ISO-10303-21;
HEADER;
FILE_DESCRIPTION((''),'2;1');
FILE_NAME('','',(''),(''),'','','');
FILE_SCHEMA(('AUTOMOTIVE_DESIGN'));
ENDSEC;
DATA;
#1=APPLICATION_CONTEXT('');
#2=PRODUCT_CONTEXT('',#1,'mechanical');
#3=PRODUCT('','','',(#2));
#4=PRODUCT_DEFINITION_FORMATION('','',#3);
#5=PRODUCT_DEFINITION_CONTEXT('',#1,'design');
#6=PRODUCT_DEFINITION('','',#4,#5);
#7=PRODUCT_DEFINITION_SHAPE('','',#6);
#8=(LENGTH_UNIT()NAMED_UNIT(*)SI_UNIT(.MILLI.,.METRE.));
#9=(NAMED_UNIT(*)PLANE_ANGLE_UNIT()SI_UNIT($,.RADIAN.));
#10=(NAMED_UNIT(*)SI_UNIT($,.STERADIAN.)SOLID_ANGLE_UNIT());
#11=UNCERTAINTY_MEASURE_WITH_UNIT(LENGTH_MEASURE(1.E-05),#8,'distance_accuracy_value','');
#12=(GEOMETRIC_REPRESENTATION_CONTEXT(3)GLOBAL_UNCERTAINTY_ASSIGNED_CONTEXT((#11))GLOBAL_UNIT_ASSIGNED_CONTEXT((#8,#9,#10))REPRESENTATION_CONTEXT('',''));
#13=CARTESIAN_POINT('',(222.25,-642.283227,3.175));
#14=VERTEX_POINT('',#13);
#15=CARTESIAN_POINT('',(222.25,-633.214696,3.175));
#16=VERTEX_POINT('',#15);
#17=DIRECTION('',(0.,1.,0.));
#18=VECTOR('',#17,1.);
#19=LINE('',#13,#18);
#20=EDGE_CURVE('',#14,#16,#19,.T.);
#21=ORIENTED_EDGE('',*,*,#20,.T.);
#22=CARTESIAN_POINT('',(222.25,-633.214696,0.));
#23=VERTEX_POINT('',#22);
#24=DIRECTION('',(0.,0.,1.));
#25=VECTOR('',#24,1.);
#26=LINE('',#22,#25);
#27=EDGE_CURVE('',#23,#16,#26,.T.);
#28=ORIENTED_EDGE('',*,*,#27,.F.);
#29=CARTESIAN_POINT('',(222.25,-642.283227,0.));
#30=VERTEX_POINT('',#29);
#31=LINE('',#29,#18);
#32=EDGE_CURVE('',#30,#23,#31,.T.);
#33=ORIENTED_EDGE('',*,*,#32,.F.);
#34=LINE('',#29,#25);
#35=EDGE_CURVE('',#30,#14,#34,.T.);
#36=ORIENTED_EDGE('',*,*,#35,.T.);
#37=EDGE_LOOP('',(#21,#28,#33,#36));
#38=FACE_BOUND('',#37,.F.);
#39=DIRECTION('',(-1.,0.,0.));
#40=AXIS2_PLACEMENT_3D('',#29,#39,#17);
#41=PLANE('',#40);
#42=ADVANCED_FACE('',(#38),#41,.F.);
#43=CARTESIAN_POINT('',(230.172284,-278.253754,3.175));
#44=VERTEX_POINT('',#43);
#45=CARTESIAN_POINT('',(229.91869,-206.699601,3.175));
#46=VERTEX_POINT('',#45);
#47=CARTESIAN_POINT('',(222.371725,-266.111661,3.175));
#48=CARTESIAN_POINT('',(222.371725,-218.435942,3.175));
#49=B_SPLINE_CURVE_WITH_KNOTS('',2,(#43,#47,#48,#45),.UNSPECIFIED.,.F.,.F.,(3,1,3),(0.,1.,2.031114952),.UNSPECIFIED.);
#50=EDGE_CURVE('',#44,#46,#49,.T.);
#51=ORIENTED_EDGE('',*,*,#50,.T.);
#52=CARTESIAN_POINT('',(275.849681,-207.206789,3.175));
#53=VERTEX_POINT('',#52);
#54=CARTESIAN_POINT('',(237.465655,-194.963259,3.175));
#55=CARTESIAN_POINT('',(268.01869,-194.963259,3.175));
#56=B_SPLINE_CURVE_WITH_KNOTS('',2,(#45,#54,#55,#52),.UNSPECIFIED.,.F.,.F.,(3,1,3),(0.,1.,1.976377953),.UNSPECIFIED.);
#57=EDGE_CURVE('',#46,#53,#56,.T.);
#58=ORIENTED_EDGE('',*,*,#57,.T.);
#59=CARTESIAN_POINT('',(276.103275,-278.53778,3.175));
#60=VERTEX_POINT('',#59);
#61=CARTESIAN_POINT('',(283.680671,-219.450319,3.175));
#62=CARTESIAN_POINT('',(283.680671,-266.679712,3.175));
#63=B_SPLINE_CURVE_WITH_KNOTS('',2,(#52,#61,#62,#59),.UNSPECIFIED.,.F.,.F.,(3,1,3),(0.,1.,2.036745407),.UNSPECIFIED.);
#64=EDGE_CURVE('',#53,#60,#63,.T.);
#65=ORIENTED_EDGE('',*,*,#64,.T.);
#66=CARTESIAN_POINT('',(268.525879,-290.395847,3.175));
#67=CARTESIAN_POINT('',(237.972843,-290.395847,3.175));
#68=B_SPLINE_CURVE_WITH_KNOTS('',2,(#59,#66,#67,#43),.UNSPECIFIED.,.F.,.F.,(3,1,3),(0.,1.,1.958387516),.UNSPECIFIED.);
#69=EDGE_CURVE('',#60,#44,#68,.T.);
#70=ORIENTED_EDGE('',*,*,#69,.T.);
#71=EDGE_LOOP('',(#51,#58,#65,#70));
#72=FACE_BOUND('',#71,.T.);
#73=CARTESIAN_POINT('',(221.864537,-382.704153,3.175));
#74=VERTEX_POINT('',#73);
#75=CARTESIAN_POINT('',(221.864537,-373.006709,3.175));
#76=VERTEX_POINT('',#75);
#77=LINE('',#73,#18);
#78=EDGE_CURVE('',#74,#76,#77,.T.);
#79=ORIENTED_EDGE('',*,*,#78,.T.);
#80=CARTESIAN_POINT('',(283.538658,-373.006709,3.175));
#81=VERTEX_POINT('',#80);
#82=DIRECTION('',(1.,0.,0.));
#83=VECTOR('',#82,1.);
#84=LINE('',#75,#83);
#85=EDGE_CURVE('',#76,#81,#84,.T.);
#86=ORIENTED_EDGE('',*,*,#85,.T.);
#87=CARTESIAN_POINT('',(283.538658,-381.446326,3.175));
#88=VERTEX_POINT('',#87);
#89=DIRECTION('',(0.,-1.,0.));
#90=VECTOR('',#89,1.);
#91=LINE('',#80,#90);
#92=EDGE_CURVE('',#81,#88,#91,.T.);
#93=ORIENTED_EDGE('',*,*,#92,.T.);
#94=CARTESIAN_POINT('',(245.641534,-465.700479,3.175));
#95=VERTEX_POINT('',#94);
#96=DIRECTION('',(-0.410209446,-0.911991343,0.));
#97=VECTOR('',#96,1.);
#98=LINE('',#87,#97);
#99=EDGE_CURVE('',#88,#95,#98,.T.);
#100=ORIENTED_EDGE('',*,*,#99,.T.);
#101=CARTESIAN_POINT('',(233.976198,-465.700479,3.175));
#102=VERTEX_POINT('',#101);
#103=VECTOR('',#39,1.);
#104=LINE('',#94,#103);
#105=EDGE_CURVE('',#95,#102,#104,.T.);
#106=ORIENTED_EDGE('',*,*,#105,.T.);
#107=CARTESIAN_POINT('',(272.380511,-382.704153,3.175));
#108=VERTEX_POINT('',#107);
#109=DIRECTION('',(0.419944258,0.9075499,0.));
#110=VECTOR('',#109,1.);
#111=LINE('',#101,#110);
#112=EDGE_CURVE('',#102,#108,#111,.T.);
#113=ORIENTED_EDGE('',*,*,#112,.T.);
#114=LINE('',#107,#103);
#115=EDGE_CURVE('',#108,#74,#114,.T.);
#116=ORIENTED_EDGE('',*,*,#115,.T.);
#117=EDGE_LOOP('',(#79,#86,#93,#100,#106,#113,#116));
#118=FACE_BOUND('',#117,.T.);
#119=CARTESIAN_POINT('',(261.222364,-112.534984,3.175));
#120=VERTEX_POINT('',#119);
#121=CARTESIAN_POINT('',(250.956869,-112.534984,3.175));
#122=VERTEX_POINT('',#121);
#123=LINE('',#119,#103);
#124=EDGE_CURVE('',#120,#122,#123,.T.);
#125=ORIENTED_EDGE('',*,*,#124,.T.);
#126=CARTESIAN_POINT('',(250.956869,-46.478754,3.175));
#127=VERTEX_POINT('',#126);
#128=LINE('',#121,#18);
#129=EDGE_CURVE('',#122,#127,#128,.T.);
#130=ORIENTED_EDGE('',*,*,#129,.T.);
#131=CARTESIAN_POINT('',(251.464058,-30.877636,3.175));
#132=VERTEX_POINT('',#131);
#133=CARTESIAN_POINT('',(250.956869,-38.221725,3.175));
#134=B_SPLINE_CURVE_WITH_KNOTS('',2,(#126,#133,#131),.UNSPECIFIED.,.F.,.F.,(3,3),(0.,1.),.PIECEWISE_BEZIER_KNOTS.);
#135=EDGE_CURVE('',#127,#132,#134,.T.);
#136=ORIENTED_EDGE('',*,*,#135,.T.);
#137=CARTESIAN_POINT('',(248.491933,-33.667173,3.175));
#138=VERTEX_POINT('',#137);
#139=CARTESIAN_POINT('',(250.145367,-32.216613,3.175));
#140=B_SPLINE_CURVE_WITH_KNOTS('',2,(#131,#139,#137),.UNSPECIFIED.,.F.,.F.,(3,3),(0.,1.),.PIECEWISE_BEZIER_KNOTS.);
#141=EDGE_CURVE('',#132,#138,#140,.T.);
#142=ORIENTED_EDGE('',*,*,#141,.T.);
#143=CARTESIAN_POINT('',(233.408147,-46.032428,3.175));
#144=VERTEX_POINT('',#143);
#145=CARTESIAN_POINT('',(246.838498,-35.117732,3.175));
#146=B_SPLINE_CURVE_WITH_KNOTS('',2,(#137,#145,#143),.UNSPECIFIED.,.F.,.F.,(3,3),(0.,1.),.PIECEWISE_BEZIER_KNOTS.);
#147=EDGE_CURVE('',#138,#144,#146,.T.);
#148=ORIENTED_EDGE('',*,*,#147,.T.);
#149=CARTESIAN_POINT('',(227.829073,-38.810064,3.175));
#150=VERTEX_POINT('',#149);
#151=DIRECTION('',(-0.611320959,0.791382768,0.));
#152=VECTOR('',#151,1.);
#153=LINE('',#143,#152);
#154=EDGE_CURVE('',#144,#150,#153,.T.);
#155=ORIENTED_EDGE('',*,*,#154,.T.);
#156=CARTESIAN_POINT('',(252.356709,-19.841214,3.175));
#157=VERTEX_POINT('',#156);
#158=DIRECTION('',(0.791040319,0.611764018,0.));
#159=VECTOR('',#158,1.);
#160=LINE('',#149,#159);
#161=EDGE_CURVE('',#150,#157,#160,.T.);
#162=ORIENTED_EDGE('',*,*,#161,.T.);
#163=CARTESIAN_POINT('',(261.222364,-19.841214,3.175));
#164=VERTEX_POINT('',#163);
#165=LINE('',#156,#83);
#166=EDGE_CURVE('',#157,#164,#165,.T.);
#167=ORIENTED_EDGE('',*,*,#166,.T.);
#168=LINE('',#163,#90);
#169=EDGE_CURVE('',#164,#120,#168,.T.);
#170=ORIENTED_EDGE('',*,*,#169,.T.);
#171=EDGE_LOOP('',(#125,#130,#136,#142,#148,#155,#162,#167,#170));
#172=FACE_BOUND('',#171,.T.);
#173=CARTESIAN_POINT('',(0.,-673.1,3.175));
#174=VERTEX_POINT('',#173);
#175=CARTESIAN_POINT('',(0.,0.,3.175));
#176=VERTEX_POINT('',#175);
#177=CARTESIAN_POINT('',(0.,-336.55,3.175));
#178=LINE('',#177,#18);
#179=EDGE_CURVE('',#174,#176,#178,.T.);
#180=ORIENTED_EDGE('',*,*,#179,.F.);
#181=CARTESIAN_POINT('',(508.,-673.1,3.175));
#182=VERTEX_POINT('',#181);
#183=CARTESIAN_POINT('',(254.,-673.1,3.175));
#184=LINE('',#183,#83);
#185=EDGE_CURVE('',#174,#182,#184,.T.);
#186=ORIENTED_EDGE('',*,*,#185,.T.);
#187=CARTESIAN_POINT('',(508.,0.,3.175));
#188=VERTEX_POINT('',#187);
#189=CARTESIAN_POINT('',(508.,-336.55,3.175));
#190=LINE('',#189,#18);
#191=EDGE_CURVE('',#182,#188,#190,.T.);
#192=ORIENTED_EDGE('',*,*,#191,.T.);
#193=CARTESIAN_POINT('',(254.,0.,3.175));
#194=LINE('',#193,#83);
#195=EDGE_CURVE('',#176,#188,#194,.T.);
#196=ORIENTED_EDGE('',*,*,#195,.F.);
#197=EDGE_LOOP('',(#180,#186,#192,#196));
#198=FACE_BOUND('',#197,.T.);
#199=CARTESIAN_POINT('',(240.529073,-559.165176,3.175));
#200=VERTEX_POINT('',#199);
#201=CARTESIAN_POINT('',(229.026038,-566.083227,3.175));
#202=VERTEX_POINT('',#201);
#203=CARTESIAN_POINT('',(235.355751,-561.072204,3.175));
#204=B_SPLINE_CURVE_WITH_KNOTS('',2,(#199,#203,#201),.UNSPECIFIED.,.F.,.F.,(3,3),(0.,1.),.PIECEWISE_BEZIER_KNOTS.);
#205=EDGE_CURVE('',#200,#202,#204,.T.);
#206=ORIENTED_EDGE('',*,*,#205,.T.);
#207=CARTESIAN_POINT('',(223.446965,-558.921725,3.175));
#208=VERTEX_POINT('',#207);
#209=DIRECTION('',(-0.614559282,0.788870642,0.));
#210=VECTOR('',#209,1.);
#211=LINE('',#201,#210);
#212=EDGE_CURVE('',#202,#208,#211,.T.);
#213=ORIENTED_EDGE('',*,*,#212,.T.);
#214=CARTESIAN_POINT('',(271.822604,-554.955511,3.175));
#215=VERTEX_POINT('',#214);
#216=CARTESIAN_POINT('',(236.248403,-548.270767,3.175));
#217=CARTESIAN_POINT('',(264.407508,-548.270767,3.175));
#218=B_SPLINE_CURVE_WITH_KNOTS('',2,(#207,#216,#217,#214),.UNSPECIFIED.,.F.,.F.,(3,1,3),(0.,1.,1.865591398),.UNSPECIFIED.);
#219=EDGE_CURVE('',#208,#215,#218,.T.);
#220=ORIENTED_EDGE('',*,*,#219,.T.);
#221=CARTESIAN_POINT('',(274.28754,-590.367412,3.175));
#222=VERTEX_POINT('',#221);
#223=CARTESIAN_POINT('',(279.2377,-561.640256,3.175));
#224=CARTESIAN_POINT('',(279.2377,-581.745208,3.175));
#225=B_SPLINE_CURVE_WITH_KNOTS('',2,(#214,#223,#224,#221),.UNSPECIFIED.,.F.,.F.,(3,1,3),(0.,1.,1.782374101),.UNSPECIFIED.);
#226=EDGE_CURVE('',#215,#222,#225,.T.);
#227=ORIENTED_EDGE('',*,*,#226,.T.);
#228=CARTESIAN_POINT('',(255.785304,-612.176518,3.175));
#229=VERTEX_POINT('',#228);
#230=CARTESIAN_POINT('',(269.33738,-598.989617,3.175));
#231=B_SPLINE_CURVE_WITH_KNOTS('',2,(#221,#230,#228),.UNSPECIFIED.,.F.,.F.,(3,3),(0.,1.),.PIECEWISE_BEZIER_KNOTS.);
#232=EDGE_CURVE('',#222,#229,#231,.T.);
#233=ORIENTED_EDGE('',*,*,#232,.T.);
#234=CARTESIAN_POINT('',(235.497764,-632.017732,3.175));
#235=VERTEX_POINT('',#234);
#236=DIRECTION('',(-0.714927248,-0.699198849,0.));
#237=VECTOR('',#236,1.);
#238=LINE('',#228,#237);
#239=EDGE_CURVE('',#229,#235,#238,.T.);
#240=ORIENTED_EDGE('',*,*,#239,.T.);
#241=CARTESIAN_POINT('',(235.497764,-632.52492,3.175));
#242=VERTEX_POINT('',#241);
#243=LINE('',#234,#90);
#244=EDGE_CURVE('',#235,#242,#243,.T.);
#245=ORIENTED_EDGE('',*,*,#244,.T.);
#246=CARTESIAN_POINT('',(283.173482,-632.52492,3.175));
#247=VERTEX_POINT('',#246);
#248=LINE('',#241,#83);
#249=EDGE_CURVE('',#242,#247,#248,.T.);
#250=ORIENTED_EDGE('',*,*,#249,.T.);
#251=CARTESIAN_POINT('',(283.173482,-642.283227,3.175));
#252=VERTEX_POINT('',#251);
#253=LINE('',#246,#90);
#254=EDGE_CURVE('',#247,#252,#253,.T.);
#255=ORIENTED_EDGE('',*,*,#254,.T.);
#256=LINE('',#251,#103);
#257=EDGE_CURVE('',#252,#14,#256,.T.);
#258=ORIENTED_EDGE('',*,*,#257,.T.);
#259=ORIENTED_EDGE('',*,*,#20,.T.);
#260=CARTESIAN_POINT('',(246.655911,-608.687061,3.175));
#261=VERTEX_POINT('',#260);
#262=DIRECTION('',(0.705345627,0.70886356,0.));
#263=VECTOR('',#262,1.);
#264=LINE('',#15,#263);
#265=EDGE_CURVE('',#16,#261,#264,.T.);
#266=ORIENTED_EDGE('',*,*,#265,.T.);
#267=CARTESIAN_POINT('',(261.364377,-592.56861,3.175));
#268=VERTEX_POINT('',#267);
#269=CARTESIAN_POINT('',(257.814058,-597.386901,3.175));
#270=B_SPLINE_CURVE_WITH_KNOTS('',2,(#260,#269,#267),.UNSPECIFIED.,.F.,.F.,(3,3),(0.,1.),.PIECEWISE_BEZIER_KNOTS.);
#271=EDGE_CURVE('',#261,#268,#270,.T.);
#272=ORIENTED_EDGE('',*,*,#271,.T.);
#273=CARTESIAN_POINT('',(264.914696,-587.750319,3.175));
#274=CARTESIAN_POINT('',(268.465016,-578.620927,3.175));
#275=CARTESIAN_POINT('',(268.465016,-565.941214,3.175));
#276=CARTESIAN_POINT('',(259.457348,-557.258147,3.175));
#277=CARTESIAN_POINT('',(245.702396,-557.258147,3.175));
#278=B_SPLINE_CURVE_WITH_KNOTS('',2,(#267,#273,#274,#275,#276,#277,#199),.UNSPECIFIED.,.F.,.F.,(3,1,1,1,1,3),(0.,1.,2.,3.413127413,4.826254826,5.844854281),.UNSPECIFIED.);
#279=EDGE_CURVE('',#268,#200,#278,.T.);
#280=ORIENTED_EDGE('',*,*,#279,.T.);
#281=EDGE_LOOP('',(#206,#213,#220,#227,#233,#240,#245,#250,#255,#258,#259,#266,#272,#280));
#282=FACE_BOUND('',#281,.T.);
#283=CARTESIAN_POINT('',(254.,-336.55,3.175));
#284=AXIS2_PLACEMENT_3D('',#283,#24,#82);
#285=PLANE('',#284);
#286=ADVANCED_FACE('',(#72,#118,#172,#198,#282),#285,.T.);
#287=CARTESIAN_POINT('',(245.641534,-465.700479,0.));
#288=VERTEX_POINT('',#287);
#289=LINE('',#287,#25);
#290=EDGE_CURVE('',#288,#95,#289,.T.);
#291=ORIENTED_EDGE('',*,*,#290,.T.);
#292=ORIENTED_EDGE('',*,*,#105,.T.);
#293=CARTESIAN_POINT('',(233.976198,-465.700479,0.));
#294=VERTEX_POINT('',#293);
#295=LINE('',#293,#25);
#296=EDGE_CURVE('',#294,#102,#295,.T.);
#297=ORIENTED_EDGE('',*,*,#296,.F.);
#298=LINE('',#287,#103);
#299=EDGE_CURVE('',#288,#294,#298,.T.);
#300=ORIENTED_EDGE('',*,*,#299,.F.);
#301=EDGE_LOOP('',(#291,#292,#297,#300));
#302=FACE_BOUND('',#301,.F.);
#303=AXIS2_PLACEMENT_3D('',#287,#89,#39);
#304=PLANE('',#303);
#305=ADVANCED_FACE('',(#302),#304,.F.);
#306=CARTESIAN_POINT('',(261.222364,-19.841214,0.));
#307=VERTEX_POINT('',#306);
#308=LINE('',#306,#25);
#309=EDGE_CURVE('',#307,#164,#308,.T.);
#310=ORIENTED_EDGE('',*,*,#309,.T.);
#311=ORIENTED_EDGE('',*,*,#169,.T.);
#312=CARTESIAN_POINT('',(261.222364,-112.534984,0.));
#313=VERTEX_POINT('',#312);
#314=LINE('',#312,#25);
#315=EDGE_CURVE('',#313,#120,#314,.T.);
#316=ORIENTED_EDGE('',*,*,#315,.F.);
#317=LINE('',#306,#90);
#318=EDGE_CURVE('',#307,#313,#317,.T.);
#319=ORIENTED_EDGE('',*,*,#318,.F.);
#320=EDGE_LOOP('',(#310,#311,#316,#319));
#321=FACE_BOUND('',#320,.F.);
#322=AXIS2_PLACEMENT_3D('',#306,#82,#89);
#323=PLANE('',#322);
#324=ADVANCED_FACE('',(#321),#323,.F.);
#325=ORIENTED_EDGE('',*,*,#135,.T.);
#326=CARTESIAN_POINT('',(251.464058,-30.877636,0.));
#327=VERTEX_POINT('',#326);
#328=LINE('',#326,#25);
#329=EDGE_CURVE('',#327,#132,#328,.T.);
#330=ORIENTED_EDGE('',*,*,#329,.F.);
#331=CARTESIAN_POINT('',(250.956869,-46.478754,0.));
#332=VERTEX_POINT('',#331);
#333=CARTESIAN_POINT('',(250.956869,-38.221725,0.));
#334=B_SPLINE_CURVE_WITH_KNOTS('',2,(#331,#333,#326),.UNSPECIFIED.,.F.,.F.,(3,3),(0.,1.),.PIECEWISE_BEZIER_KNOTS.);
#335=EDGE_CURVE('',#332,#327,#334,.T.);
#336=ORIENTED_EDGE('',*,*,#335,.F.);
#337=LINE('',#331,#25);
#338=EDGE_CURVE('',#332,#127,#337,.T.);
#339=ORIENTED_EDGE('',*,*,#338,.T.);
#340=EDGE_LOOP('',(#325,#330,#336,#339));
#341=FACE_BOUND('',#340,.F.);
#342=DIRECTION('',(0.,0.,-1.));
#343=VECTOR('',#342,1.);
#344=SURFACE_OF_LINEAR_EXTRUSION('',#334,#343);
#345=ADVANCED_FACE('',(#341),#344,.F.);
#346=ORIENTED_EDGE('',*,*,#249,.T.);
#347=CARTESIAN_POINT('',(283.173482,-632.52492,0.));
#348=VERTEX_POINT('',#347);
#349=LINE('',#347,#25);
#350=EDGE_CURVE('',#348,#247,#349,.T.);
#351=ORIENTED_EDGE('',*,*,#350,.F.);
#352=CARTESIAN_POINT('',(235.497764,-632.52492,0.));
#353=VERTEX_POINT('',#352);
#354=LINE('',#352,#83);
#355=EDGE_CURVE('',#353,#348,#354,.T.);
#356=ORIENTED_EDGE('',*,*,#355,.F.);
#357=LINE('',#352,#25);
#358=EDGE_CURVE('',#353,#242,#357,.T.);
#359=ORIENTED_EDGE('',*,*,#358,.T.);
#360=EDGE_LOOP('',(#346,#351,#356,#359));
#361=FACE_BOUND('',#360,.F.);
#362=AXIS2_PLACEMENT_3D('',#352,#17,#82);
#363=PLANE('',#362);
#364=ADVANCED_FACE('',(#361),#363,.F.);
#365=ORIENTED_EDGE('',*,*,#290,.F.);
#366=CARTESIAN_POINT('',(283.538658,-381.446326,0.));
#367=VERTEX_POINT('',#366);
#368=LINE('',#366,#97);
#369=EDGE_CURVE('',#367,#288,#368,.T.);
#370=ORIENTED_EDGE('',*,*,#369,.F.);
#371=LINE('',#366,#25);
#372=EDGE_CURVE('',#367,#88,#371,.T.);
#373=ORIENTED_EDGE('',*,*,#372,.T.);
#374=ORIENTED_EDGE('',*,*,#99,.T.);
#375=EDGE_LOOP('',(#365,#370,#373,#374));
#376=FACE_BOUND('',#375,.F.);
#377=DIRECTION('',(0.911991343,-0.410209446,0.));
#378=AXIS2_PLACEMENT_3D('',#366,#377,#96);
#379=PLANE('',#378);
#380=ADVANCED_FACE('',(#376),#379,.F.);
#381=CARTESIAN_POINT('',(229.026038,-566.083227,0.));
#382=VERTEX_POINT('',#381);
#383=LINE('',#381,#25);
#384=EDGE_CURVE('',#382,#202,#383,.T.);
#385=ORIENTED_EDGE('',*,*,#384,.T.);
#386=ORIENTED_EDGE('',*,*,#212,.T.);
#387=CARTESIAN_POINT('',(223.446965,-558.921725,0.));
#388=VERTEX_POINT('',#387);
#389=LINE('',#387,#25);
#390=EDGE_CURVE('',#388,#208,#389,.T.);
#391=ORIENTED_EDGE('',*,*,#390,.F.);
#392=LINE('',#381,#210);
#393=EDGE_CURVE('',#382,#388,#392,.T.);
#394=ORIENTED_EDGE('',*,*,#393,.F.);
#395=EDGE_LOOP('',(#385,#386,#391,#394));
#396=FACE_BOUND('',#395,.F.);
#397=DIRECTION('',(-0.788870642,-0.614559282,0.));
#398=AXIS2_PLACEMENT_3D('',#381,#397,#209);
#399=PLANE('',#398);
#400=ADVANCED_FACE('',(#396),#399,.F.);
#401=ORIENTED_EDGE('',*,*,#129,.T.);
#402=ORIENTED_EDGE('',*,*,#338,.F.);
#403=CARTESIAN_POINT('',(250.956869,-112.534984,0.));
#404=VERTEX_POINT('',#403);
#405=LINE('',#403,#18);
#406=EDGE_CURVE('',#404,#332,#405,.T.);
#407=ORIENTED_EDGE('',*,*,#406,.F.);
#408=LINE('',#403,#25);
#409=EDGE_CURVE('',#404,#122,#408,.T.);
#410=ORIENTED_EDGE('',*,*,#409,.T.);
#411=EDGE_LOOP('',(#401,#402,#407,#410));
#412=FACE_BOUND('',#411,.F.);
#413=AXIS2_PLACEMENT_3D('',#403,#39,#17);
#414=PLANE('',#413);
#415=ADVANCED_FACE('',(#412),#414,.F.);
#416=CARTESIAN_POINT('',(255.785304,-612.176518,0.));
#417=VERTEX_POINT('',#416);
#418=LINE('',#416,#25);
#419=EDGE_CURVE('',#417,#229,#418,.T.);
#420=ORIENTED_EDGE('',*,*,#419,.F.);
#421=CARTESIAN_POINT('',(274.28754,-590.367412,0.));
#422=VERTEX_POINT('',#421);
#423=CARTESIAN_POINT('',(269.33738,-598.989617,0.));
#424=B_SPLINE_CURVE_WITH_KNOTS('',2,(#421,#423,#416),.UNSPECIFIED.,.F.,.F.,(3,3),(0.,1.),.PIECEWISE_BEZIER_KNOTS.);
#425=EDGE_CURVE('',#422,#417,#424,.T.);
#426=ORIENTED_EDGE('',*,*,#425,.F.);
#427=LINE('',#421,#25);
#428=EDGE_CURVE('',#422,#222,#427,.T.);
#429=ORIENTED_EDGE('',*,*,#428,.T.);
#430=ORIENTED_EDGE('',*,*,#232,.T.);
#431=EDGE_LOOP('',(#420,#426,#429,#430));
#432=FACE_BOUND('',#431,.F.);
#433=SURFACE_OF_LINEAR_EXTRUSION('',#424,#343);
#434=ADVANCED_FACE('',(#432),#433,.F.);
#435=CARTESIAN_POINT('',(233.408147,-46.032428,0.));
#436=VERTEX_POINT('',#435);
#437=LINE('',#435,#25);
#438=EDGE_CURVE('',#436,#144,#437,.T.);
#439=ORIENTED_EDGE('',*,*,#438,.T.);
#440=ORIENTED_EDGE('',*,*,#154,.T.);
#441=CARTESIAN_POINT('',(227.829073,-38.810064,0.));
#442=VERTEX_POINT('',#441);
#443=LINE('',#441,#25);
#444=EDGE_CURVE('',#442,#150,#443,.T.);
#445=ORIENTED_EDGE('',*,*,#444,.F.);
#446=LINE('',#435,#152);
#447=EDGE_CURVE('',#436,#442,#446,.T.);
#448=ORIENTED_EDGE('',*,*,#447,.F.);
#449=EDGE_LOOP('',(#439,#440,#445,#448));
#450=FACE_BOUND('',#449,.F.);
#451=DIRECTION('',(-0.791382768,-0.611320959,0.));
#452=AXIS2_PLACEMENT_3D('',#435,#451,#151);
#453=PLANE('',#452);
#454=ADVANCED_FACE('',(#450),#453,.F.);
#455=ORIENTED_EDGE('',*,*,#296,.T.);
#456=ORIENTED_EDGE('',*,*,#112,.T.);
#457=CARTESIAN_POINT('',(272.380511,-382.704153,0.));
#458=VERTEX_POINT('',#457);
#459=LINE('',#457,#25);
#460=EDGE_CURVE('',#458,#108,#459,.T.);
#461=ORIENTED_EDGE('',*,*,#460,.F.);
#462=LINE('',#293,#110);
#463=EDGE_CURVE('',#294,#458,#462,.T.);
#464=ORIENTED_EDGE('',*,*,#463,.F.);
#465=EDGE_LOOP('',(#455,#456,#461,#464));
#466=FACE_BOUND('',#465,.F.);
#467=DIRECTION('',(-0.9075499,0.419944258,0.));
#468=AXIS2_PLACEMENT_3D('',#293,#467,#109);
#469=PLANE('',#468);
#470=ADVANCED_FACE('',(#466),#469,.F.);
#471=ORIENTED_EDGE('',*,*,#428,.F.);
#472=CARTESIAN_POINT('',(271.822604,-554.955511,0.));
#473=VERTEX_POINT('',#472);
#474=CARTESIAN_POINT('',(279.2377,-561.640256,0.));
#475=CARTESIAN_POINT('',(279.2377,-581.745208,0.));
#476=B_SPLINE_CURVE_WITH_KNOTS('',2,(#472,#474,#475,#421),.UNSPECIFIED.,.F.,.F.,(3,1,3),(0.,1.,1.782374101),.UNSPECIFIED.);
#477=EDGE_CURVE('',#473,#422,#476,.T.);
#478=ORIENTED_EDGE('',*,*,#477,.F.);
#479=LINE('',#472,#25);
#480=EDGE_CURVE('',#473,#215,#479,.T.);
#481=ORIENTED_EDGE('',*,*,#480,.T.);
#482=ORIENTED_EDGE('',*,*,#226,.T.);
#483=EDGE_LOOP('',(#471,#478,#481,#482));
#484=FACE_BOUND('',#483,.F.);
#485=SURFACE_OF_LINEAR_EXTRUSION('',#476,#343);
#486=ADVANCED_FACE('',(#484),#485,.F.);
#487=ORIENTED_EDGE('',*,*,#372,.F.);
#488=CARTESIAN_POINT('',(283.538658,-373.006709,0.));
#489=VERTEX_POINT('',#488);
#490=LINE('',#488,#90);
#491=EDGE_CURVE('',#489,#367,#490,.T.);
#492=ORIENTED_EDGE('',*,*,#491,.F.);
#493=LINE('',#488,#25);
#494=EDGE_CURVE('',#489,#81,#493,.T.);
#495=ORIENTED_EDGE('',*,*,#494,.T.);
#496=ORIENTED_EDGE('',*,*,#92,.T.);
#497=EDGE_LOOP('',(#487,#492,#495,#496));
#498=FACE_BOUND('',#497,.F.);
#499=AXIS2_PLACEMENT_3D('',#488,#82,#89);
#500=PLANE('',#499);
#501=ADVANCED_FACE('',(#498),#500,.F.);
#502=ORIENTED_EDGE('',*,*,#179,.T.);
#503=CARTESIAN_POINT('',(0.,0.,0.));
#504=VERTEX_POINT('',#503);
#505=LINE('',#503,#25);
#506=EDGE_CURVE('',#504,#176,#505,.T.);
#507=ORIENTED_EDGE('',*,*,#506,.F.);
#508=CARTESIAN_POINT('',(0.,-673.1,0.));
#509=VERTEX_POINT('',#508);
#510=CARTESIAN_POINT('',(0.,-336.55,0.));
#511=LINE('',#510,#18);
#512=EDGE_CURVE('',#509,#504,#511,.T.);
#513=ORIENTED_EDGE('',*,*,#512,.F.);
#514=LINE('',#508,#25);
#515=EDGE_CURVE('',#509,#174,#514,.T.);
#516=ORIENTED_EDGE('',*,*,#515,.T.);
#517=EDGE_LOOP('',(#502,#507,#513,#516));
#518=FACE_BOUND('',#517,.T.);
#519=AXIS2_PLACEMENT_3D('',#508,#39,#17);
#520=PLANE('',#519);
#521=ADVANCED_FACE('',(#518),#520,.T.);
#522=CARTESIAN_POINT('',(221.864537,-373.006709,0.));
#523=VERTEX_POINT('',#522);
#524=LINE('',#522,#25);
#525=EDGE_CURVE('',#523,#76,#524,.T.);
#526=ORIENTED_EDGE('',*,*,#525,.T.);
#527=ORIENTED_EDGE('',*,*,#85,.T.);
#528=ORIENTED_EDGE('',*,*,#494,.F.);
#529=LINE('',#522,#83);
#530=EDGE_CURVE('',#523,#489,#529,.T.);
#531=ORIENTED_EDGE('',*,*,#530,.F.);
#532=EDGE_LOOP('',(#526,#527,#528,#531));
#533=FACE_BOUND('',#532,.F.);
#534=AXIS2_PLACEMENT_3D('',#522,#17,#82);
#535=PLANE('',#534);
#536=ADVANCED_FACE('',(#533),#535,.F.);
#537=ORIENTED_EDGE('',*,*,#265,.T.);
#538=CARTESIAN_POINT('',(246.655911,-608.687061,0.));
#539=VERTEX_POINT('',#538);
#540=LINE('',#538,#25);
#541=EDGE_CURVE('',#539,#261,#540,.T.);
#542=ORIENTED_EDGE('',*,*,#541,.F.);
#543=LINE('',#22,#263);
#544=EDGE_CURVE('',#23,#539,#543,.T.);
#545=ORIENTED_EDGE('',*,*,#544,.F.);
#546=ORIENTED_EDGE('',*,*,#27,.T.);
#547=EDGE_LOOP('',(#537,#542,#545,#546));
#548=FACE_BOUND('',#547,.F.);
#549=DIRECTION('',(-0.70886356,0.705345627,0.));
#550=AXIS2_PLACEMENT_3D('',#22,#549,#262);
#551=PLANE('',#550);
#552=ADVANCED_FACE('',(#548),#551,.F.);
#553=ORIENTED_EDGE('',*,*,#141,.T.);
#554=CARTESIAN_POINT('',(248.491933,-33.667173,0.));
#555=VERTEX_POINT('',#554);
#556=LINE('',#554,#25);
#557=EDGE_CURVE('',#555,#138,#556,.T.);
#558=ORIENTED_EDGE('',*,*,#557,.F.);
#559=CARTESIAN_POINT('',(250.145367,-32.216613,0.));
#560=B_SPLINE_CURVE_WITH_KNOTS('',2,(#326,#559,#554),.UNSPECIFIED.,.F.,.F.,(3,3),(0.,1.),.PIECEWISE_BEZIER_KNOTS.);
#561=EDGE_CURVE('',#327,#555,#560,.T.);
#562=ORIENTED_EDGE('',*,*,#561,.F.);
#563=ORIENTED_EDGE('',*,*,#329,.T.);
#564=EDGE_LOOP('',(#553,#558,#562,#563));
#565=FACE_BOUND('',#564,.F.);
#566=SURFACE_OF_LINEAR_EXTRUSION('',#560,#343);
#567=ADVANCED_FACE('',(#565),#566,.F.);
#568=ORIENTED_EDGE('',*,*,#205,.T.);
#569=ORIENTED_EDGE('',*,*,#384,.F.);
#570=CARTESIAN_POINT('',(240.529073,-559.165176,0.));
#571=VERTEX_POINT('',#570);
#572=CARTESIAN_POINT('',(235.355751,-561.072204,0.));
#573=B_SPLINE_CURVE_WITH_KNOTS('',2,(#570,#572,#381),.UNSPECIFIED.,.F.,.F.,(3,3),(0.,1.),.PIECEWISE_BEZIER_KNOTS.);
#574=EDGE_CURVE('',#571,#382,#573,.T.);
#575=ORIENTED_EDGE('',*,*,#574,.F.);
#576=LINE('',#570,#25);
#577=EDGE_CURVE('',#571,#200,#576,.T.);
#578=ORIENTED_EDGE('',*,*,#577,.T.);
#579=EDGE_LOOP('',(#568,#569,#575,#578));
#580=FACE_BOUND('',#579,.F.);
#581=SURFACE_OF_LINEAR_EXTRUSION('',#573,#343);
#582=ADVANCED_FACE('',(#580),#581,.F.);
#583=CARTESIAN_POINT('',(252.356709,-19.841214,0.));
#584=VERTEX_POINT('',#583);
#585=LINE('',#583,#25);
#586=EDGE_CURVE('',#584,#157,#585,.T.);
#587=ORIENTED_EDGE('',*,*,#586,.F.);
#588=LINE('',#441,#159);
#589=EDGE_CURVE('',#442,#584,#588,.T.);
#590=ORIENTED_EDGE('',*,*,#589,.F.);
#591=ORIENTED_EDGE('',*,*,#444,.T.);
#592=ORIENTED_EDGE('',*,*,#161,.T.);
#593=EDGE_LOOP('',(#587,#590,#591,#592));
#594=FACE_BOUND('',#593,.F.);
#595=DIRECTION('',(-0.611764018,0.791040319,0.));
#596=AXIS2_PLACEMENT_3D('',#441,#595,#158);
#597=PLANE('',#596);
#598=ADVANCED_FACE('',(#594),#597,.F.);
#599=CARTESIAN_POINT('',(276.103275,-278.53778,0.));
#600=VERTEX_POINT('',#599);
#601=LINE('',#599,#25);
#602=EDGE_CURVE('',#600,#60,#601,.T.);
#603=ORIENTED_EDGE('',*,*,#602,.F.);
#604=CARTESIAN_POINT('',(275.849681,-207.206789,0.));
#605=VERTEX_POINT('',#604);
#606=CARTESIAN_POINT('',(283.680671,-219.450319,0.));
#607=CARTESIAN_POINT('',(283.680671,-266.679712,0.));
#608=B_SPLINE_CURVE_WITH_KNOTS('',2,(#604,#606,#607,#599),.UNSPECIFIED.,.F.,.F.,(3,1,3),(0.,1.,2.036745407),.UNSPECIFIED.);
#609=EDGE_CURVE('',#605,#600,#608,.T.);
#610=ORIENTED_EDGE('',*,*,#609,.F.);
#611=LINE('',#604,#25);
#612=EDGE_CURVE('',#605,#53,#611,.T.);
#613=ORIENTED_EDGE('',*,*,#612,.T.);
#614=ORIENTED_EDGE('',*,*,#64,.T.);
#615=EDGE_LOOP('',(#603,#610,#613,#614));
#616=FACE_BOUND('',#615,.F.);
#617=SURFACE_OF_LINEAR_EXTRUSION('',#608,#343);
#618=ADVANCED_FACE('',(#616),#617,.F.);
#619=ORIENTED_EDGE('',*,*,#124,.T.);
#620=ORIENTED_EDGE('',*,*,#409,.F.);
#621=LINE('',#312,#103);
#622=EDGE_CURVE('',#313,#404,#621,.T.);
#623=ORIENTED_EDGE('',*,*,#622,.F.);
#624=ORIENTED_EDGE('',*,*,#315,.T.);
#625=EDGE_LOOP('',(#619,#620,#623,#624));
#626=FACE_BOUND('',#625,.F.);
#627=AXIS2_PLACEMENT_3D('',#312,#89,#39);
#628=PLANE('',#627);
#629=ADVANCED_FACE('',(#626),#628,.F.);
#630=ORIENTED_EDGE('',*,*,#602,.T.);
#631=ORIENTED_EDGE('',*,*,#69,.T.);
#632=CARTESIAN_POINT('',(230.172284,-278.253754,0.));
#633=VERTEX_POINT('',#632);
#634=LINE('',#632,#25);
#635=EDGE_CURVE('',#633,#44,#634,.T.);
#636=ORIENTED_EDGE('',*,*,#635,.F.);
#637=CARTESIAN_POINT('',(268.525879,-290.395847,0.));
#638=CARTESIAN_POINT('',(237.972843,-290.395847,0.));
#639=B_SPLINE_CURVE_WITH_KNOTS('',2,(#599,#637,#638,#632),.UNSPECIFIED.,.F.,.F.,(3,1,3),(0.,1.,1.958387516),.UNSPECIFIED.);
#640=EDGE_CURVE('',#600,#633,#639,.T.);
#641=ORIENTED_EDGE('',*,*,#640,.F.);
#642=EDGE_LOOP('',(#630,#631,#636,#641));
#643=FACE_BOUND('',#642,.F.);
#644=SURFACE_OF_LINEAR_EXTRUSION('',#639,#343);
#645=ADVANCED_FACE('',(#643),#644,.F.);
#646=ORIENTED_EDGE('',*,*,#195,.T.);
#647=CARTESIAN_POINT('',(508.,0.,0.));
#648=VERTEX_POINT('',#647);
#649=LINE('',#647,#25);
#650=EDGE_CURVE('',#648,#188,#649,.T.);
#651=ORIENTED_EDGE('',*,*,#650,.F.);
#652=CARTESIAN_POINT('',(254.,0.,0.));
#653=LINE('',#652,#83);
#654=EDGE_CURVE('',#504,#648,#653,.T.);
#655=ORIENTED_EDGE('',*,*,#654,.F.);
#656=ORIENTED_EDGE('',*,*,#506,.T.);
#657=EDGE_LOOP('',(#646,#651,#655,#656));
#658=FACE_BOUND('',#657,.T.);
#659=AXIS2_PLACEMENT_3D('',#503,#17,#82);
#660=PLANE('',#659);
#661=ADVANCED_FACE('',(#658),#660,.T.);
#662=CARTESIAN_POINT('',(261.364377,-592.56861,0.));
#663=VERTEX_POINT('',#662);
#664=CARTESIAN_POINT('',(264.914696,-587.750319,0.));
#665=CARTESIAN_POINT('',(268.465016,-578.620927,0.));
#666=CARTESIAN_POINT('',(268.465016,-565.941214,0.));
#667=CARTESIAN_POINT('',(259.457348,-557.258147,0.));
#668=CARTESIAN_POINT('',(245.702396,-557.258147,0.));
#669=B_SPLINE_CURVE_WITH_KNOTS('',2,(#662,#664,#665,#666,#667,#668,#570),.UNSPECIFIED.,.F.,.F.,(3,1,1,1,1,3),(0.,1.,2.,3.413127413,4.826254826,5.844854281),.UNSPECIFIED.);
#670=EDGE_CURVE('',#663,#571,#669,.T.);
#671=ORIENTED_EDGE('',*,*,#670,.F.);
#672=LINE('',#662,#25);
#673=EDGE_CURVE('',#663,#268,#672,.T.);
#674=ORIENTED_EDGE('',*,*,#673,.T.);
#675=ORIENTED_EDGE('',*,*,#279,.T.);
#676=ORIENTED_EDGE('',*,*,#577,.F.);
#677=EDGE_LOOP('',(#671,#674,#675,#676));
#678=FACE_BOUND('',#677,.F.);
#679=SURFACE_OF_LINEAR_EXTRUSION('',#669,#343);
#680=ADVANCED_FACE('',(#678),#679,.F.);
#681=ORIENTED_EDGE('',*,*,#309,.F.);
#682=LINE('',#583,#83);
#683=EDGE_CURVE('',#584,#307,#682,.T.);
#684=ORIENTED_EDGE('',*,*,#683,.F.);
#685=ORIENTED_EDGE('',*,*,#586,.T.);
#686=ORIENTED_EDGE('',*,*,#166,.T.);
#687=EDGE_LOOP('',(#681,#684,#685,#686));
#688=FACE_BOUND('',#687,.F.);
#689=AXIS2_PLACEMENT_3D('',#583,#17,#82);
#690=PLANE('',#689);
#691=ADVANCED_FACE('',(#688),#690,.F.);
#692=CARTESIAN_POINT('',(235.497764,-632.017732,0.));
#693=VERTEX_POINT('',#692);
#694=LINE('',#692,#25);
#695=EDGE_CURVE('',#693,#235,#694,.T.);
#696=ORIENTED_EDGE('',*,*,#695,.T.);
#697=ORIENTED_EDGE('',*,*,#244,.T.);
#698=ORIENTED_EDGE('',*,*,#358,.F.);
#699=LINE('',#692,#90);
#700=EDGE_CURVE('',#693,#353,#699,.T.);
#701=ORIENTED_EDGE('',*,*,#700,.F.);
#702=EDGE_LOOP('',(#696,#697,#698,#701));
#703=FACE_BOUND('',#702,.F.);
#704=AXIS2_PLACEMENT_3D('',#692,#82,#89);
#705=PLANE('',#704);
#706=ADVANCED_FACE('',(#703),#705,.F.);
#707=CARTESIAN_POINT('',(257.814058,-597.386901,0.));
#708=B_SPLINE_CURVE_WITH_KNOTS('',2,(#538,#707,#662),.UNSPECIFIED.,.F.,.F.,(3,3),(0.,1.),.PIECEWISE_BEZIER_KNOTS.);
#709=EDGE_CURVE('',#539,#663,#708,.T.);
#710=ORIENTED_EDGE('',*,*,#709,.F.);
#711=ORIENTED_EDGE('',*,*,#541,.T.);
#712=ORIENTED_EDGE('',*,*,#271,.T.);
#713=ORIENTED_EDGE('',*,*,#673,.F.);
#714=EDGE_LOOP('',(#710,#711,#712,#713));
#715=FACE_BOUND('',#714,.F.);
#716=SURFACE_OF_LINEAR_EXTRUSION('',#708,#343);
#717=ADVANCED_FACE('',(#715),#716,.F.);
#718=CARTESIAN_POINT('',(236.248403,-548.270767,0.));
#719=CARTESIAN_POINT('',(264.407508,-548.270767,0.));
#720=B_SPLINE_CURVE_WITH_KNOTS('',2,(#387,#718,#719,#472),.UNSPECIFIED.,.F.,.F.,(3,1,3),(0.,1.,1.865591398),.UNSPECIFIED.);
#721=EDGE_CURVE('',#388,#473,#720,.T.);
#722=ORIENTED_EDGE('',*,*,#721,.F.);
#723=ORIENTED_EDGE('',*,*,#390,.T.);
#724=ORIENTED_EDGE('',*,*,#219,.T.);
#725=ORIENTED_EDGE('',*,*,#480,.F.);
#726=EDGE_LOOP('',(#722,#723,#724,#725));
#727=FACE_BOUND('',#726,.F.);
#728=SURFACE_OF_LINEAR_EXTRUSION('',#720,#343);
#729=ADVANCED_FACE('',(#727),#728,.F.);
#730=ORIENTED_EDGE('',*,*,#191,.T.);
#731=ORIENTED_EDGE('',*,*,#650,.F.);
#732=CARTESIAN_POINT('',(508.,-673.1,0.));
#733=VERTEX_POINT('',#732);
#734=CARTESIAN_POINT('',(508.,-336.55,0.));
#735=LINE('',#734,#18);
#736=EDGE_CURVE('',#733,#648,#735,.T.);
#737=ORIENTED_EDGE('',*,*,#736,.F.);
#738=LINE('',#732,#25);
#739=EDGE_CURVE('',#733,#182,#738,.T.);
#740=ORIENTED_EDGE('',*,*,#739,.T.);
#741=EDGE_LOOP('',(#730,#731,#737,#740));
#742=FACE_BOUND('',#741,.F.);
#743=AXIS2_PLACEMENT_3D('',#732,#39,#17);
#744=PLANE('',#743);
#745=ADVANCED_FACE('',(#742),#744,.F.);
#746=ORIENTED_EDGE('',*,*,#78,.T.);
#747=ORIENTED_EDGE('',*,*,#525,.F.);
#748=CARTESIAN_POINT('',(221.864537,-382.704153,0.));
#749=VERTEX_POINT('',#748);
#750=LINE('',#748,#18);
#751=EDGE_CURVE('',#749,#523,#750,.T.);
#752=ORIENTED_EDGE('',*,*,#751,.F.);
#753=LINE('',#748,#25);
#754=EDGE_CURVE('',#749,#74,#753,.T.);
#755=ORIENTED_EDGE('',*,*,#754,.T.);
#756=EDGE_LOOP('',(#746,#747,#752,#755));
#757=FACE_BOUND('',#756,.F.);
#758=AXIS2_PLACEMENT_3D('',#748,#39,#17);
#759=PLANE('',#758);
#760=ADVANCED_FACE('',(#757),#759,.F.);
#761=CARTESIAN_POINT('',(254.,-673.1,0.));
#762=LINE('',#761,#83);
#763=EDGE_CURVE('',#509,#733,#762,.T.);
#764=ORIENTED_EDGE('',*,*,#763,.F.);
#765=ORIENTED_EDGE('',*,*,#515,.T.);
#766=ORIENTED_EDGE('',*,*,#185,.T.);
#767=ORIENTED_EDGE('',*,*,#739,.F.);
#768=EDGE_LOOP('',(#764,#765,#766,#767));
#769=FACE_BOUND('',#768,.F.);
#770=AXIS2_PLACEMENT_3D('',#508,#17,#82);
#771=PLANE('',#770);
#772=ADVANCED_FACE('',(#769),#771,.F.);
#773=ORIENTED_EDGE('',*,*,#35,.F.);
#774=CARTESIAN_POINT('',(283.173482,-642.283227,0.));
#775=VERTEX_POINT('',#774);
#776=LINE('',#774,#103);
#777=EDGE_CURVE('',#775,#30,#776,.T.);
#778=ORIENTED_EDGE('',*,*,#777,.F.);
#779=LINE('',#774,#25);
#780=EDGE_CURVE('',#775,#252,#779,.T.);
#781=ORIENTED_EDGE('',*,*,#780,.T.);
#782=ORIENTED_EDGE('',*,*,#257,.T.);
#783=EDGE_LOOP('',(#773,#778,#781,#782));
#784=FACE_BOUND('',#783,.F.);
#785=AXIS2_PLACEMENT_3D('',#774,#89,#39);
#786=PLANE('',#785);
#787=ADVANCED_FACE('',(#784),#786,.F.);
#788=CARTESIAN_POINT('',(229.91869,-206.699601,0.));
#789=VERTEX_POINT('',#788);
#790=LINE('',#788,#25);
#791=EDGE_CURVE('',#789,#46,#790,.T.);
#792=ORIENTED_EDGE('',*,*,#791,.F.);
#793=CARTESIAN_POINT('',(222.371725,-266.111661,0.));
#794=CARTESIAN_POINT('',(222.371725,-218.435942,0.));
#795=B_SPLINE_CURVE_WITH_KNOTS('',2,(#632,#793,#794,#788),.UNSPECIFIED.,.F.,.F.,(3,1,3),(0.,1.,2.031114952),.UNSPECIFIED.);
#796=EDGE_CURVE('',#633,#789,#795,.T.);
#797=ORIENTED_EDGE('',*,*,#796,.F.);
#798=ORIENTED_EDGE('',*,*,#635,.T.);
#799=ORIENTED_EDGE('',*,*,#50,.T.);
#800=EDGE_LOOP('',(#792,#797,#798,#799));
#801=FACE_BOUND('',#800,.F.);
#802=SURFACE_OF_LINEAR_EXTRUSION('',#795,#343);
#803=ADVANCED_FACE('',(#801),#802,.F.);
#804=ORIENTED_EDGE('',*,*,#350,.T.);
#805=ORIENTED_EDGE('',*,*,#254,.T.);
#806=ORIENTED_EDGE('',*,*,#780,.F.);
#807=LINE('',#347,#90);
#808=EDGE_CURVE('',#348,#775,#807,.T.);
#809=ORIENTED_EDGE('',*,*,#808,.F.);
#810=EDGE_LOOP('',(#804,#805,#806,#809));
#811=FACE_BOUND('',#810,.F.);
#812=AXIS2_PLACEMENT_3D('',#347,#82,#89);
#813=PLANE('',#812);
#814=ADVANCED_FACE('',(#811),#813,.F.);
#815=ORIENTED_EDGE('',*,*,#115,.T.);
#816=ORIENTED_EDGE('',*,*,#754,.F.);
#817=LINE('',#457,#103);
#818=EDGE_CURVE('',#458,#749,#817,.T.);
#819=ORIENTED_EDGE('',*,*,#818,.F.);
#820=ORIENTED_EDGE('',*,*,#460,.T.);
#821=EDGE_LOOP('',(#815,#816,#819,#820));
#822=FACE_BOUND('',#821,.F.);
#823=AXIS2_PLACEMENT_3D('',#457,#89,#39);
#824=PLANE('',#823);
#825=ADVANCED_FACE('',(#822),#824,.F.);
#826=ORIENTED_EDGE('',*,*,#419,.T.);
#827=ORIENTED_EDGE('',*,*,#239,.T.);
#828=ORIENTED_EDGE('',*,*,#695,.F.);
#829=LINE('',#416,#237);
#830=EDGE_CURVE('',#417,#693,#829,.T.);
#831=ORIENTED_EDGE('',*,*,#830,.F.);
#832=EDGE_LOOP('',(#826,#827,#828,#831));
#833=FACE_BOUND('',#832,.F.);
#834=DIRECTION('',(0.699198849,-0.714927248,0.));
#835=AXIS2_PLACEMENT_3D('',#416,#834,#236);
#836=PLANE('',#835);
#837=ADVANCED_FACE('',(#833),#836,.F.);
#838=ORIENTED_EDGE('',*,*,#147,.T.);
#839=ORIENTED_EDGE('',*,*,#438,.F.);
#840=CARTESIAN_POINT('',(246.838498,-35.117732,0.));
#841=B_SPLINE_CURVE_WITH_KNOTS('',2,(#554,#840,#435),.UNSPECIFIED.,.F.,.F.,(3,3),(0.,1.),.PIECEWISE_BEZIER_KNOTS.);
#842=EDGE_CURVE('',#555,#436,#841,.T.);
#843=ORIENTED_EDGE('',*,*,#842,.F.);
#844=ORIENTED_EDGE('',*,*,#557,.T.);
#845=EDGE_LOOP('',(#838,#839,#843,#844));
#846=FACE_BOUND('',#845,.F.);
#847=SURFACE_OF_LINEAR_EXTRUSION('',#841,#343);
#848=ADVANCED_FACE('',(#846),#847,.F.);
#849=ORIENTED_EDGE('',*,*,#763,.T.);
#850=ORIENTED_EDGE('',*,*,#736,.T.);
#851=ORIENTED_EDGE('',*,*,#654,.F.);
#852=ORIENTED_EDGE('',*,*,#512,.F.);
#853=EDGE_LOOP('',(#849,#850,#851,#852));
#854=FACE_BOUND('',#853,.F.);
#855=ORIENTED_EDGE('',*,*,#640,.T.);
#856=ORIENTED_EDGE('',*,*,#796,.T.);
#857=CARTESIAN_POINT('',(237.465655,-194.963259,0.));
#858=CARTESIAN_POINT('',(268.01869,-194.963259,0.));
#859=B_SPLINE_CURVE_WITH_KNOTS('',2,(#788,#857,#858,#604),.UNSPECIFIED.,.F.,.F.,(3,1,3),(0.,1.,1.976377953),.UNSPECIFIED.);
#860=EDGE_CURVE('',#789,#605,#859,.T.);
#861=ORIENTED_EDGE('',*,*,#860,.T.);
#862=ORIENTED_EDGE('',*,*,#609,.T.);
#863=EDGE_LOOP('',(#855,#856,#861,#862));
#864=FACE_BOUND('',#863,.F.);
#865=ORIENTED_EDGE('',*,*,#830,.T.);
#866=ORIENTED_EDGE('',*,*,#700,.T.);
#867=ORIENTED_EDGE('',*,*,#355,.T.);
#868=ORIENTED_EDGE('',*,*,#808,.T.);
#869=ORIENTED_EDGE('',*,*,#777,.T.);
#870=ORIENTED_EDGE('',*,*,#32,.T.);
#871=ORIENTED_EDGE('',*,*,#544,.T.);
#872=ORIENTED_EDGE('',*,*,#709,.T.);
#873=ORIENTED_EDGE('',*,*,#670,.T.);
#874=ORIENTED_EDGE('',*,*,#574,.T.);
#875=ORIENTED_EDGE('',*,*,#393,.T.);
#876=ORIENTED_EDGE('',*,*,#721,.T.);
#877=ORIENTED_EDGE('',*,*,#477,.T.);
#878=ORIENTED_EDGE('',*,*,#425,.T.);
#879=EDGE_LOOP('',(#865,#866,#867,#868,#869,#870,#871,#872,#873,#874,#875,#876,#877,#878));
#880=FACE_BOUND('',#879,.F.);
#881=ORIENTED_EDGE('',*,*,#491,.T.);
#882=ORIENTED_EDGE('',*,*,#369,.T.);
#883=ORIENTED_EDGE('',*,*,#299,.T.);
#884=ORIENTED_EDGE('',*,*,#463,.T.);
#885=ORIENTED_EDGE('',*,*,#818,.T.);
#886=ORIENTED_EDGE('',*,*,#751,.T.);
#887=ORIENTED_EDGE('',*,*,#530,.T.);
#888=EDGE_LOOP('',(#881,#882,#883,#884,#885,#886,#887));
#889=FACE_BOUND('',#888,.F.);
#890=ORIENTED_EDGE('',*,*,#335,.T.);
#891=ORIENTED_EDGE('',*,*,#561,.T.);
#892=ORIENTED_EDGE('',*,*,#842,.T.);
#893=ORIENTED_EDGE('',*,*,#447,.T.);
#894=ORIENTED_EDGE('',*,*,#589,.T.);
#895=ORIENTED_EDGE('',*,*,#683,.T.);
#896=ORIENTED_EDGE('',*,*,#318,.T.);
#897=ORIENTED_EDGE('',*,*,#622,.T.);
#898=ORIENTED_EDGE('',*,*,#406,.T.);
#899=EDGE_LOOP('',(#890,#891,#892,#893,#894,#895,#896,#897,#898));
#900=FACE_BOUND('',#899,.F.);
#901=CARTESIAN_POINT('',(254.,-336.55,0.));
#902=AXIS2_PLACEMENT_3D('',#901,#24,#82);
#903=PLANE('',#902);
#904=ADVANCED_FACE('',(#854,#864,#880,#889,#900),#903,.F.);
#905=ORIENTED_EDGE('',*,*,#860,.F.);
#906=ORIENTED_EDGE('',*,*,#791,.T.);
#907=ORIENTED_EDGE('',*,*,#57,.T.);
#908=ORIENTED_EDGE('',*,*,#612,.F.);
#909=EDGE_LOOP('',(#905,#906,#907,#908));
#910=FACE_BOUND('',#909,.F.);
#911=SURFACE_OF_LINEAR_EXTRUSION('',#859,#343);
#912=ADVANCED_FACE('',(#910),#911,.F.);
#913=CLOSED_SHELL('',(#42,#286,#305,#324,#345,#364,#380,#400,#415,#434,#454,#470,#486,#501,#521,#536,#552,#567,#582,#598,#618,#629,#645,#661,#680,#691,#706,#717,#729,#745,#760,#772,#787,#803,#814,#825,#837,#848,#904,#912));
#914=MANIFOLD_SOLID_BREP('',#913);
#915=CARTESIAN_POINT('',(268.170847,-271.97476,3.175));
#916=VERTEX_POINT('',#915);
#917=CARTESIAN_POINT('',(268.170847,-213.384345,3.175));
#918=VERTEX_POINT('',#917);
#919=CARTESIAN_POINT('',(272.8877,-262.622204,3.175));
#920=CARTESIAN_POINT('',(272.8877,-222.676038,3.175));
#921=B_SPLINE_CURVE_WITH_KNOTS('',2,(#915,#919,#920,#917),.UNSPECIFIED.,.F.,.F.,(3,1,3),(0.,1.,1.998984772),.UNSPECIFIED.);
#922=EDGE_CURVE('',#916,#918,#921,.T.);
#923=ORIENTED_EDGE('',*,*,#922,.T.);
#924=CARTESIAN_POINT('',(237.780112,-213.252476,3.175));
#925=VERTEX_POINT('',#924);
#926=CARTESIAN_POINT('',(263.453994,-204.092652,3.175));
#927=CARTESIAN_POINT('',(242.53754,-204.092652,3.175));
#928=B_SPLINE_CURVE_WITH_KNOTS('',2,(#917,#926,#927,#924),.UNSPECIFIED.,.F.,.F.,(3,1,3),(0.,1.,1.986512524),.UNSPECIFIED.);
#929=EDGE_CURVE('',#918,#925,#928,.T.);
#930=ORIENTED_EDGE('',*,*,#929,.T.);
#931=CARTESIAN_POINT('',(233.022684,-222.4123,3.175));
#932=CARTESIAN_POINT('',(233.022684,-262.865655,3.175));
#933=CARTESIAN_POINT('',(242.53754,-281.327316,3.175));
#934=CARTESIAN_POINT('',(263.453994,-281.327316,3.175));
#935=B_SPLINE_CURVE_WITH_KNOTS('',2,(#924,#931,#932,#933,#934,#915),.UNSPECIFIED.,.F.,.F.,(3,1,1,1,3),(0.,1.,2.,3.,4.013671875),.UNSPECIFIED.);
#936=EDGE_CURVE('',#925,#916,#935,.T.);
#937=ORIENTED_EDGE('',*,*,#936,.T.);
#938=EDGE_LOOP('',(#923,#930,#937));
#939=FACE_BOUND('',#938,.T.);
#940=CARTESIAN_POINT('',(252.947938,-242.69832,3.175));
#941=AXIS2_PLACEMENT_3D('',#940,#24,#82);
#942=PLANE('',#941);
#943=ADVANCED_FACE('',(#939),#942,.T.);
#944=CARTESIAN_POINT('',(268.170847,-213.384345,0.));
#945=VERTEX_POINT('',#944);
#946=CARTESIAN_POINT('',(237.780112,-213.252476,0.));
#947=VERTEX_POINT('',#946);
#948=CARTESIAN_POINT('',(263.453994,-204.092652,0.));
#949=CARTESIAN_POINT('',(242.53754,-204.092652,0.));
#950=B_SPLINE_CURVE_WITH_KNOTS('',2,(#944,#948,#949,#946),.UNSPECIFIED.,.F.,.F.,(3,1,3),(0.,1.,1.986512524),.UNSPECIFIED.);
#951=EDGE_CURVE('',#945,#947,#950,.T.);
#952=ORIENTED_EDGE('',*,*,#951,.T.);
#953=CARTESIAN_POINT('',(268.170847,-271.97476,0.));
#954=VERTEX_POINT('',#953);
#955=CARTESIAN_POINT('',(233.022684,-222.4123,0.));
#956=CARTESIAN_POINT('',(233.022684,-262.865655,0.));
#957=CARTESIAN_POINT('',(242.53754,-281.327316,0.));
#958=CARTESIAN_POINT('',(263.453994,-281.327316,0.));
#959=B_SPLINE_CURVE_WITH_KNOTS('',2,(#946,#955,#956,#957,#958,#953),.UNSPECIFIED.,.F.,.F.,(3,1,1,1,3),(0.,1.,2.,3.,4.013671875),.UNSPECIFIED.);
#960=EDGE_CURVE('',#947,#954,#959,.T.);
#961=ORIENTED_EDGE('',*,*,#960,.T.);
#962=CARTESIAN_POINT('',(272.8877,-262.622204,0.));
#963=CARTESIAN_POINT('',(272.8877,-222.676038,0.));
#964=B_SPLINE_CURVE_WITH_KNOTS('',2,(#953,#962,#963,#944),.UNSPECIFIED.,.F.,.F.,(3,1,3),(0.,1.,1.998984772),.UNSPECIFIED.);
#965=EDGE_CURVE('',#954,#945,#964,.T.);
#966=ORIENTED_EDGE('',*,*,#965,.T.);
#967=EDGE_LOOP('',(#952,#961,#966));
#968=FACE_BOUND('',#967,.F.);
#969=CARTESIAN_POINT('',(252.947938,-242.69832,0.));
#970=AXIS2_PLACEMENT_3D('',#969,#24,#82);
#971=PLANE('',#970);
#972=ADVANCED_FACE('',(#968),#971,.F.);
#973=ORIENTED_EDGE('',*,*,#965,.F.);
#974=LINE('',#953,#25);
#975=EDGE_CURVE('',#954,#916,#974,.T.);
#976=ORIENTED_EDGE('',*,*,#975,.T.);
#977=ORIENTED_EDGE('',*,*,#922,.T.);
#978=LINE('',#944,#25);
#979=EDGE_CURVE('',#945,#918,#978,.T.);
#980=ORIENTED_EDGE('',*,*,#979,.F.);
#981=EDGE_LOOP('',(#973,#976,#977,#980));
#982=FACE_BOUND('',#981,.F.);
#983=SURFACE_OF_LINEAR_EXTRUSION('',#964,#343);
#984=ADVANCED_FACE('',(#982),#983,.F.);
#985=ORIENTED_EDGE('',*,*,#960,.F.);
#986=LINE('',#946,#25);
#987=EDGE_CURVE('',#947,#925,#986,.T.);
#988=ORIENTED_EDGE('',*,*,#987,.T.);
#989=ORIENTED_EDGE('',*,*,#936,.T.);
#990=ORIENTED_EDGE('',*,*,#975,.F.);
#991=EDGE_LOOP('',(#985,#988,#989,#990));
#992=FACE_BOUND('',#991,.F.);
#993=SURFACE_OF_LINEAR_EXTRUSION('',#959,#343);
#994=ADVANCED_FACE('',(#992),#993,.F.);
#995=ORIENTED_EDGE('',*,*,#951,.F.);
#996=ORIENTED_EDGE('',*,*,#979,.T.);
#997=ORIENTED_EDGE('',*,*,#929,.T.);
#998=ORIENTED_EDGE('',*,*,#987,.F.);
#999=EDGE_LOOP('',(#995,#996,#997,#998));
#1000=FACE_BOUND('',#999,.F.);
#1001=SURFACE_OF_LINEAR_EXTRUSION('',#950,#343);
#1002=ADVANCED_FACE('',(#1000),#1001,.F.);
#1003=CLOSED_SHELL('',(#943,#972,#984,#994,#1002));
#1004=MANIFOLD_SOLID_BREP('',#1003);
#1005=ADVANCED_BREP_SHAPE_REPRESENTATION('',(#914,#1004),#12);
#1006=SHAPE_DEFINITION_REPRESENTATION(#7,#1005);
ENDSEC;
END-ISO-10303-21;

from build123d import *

# Parameters (mm, degrees)
F0_W     = 508
F0_H     = 673.1
F1_DEPTH = 3.175


# Not quite as in the source:
# - a feature names something its author has since deleted; it is built from what else it names


with BuildPart() as f1:
    # F0 (on Top) → F1 (new body)
    with BuildSketch(Plane.XY):
        with Locations((254, -336.55)):
            Rectangle(F0_W, F0_H)
        with BuildLine():
            Line((283.1734824281, -632.5249201278), (283.1734824281, -642.2832268371))
            Line((283.1734824281, -642.2832268371), (222.25, -642.2832268371))
            Line((222.25, -642.2832268371), (222.25, -633.2146964856))
            Line((222.25, -633.2146964856), (246.6559105431, -608.6870607029))
            add(Edge.make_bspline(
                [(246.6559105431, -608.6870607029), (257.814057508, -597.3869009585), (261.3643769968, -592.5686102236)],
                knots=[0, 0, 0, 1, 1, 1], degree=2))
            add(Edge.make_bspline(
                [(261.3643769968, -592.5686102236), (264.9146964856, -587.7503194888), (266.68985623, -583.1856230032)],
                knots=[0, 0, 0, 1, 1, 1], degree=2))
            add(Edge.make_bspline(
                [(266.68985623, -583.1856230032), (268.4650159744, -578.6209265176), (268.4650159744, -573.3664536741)],
                knots=[0, 0, 0, 1, 1, 1], degree=2))
            add(Edge.make_bspline(
                [(268.4650159744, -573.3664536741), (268.4650159744, -565.9412140575), (263.9611821086, -561.5996805112)],
                knots=[0, 0, 0, 1, 1, 1], degree=2))
            add(Edge.make_bspline(
                [(263.9611821086, -561.5996805112), (259.4573482428, -557.2581469649), (251.464057508, -557.2581469649)],
                knots=[0, 0, 0, 1, 1, 1], degree=2))
            add(Edge.make_bspline(
                [(251.464057508, -557.2581469649), (245.7023961661, -557.2581469649), (240.5290734824, -559.1651757189)],
                knots=[0, 0, 0, 1, 1, 1], degree=2))
            add(Edge.make_bspline(
                [(240.5290734824, -559.1651757189), (235.3557507987, -561.0722044728), (229.0260383387, -566.0832268371)],
                knots=[0, 0, 0, 1, 1, 1], degree=2))
            Line((229.0260383387, -566.0832268371), (223.4469648562, -558.9217252396))
            add(Edge.make_bspline(
                [(223.4469648562, -558.9217252396), (236.2484025559, -548.2707667732), (251.3423322684, -548.2707667732)],
                knots=[0, 0, 0, 1, 1, 1], degree=2))
            add(Edge.make_bspline(
                [(251.3423322684, -548.2707667732), (264.4075079872, -548.2707667732), (271.8226038339, -554.9555111821)],
                knots=[0, 0, 0, 1, 1, 1], degree=2))
            add(Edge.make_bspline(
                [(271.8226038339, -554.9555111821), (279.2376996805, -561.6402555911), (279.2376996805, -572.9201277955)],
                knots=[0, 0, 0, 1, 1, 1], degree=2))
            add(Edge.make_bspline(
                [(279.2376996805, -572.9201277955), (279.2376996805, -581.7452076677), (274.2875399361, -590.3674121406)],
                knots=[0, 0, 0, 1, 1, 1], degree=2))
            add(Edge.make_bspline(
                [(274.2875399361, -590.3674121406), (269.3373801917, -598.9896166134), (255.7853035144, -612.1765175719)],
                knots=[0, 0, 0, 1, 1, 1], degree=2))
            Line((255.7853035144, -612.1765175719), (235.4977635783, -632.0177316294))
            Line((235.4977635783, -632.0177316294), (235.4977635783, -632.5249201278))
            Line((235.4977635783, -632.5249201278), (283.1734824281, -632.5249201278))
        make_face(mode=Mode.SUBTRACT)
        Polygon((245.6415335463, -465.7004792332), (233.9761980831, -465.7004792332), (272.3805111821, -382.7041533546), (221.8645367412, -382.7041533546), (221.8645367412, -373.0067092652), (283.538658147, -373.0067092652), (283.538658147, -381.4463258786), align=None, mode=Mode.SUBTRACT)
        with BuildLine():
            add(Edge.make_bspline(
                [(275.8496805112, -207.2067891374), (283.6806709265, -219.4503194888), (283.6806709265, -242.6389776358)],
                knots=[0, 0, 0, 1, 1, 1], degree=2))
            add(Edge.make_bspline(
                [(283.6806709265, -242.6389776358), (283.6806709265, -266.6797124601), (276.1032747604, -278.5377795527)],
                knots=[0, 0, 0, 1, 1, 1], degree=2))
            add(Edge.make_bspline(
                [(276.1032747604, -278.5377795527), (268.5258785942, -290.3958466454), (252.9247603834, -290.3958466454)],
                knots=[0, 0, 0, 1, 1, 1], degree=2))
            add(Edge.make_bspline(
                [(252.9247603834, -290.3958466454), (237.9728434505, -290.3958466454), (230.172284345, -278.2537539936)],
                knots=[0, 0, 0, 1, 1, 1], degree=2))
            add(Edge.make_bspline(
                [(230.172284345, -278.2537539936), (222.3717252396, -266.1116613419), (222.3717252396, -242.6389776358)],
                knots=[0, 0, 0, 1, 1, 1], degree=2))
            add(Edge.make_bspline(
                [(222.3717252396, -242.6389776358), (222.3717252396, -218.435942492), (229.9186900958, -206.699600639)],
                knots=[0, 0, 0, 1, 1, 1], degree=2))
            add(Edge.make_bspline(
                [(229.9186900958, -206.699600639), (237.4656549521, -194.9632587859), (252.9247603834, -194.9632587859)],
                knots=[0, 0, 0, 1, 1, 1], degree=2))
            add(Edge.make_bspline(
                [(252.9247603834, -194.9632587859), (268.0186900958, -194.9632587859), (275.8496805112, -207.2067891374)],
                knots=[0, 0, 0, 1, 1, 1], degree=2))
        make_face(mode=Mode.SUBTRACT)
        with BuildLine():
            Line((261.2223642173, -19.8412140575), (261.2223642173, -112.5349840256))
            Line((261.2223642173, -112.5349840256), (250.9568690096, -112.5349840256))
            Line((250.9568690096, -112.5349840256), (250.9568690096, -46.4787539936))
            add(Edge.make_bspline(
                [(250.9568690096, -46.4787539936), (250.9568690096, -38.2217252396), (251.464057508, -30.8776357827)],
                knots=[0, 0, 0, 1, 1, 1], degree=2))
            add(Edge.make_bspline(
                [(251.464057508, -30.8776357827), (250.1453674121, -32.2166134185), (248.4919329073, -33.667172524)],
                knots=[0, 0, 0, 1, 1, 1], degree=2))
            add(Edge.make_bspline(
                [(248.4919329073, -33.667172524), (246.8384984026, -35.1177316294), (233.4081469649, -46.032428115)],
                knots=[0, 0, 0, 1, 1, 1], degree=2))
            Line((233.4081469649, -46.032428115), (227.8290734824, -38.8100638978))
            Line((227.8290734824, -38.8100638978), (252.3567092652, -19.8412140575))
            Line((252.3567092652, -19.8412140575), (261.2223642173, -19.8412140575))
        make_face(mode=Mode.SUBTRACT)
    extrude(amount=F1_DEPTH)


with BuildPart() as f1b:
    # F0 (on Top) → F1, piece 2 (new body)
    with BuildSketch(Plane.XY):
        with BuildLine():
            add(Edge.make_bspline(
                [(237.7801118211, -213.2524760383), (233.0226837061, -222.4123003195), (233.0226837061, -242.6389776358)],
                knots=[0, 0, 0, 1, 1, 1], degree=2))
            add(Edge.make_bspline(
                [(233.0226837061, -242.6389776358), (233.0226837061, -262.8656549521), (237.7801118211, -272.096485623)],
                knots=[0, 0, 0, 1, 1, 1], degree=2))
            add(Edge.make_bspline(
                [(237.7801118211, -272.096485623), (242.5375399361, -281.3273162939), (252.9247603834, -281.3273162939)],
                knots=[0, 0, 0, 1, 1, 1], degree=2))
            add(Edge.make_bspline(
                [(252.9247603834, -281.3273162939), (263.4539936102, -281.3273162939), (268.1708466454, -271.9747603834)],
                knots=[0, 0, 0, 1, 1, 1], degree=2))
            add(Edge.make_bspline(
                [(268.1708466454, -271.9747603834), (272.8876996805, -262.6222044728), (272.8876996805, -242.6389776358)],
                knots=[0, 0, 0, 1, 1, 1], degree=2))
            add(Edge.make_bspline(
                [(272.8876996805, -242.6389776358), (272.8876996805, -222.6760383387), (268.1708466454, -213.3843450479)],
                knots=[0, 0, 0, 1, 1, 1], degree=2))
            add(Edge.make_bspline(
                [(268.1708466454, -213.3843450479), (263.4539936102, -204.0926517572), (252.9247603834, -204.0926517572)],
                knots=[0, 0, 0, 1, 1, 1], degree=2))
            add(Edge.make_bspline(
                [(252.9247603834, -204.0926517572), (242.5375399361, -204.0926517572), (237.7801118211, -213.2524760383)],
                knots=[0, 0, 0, 1, 1, 1], degree=2))
        make_face()
    extrude(amount=F1_DEPTH)


solid = Compound([f1.part, f1b.part])
